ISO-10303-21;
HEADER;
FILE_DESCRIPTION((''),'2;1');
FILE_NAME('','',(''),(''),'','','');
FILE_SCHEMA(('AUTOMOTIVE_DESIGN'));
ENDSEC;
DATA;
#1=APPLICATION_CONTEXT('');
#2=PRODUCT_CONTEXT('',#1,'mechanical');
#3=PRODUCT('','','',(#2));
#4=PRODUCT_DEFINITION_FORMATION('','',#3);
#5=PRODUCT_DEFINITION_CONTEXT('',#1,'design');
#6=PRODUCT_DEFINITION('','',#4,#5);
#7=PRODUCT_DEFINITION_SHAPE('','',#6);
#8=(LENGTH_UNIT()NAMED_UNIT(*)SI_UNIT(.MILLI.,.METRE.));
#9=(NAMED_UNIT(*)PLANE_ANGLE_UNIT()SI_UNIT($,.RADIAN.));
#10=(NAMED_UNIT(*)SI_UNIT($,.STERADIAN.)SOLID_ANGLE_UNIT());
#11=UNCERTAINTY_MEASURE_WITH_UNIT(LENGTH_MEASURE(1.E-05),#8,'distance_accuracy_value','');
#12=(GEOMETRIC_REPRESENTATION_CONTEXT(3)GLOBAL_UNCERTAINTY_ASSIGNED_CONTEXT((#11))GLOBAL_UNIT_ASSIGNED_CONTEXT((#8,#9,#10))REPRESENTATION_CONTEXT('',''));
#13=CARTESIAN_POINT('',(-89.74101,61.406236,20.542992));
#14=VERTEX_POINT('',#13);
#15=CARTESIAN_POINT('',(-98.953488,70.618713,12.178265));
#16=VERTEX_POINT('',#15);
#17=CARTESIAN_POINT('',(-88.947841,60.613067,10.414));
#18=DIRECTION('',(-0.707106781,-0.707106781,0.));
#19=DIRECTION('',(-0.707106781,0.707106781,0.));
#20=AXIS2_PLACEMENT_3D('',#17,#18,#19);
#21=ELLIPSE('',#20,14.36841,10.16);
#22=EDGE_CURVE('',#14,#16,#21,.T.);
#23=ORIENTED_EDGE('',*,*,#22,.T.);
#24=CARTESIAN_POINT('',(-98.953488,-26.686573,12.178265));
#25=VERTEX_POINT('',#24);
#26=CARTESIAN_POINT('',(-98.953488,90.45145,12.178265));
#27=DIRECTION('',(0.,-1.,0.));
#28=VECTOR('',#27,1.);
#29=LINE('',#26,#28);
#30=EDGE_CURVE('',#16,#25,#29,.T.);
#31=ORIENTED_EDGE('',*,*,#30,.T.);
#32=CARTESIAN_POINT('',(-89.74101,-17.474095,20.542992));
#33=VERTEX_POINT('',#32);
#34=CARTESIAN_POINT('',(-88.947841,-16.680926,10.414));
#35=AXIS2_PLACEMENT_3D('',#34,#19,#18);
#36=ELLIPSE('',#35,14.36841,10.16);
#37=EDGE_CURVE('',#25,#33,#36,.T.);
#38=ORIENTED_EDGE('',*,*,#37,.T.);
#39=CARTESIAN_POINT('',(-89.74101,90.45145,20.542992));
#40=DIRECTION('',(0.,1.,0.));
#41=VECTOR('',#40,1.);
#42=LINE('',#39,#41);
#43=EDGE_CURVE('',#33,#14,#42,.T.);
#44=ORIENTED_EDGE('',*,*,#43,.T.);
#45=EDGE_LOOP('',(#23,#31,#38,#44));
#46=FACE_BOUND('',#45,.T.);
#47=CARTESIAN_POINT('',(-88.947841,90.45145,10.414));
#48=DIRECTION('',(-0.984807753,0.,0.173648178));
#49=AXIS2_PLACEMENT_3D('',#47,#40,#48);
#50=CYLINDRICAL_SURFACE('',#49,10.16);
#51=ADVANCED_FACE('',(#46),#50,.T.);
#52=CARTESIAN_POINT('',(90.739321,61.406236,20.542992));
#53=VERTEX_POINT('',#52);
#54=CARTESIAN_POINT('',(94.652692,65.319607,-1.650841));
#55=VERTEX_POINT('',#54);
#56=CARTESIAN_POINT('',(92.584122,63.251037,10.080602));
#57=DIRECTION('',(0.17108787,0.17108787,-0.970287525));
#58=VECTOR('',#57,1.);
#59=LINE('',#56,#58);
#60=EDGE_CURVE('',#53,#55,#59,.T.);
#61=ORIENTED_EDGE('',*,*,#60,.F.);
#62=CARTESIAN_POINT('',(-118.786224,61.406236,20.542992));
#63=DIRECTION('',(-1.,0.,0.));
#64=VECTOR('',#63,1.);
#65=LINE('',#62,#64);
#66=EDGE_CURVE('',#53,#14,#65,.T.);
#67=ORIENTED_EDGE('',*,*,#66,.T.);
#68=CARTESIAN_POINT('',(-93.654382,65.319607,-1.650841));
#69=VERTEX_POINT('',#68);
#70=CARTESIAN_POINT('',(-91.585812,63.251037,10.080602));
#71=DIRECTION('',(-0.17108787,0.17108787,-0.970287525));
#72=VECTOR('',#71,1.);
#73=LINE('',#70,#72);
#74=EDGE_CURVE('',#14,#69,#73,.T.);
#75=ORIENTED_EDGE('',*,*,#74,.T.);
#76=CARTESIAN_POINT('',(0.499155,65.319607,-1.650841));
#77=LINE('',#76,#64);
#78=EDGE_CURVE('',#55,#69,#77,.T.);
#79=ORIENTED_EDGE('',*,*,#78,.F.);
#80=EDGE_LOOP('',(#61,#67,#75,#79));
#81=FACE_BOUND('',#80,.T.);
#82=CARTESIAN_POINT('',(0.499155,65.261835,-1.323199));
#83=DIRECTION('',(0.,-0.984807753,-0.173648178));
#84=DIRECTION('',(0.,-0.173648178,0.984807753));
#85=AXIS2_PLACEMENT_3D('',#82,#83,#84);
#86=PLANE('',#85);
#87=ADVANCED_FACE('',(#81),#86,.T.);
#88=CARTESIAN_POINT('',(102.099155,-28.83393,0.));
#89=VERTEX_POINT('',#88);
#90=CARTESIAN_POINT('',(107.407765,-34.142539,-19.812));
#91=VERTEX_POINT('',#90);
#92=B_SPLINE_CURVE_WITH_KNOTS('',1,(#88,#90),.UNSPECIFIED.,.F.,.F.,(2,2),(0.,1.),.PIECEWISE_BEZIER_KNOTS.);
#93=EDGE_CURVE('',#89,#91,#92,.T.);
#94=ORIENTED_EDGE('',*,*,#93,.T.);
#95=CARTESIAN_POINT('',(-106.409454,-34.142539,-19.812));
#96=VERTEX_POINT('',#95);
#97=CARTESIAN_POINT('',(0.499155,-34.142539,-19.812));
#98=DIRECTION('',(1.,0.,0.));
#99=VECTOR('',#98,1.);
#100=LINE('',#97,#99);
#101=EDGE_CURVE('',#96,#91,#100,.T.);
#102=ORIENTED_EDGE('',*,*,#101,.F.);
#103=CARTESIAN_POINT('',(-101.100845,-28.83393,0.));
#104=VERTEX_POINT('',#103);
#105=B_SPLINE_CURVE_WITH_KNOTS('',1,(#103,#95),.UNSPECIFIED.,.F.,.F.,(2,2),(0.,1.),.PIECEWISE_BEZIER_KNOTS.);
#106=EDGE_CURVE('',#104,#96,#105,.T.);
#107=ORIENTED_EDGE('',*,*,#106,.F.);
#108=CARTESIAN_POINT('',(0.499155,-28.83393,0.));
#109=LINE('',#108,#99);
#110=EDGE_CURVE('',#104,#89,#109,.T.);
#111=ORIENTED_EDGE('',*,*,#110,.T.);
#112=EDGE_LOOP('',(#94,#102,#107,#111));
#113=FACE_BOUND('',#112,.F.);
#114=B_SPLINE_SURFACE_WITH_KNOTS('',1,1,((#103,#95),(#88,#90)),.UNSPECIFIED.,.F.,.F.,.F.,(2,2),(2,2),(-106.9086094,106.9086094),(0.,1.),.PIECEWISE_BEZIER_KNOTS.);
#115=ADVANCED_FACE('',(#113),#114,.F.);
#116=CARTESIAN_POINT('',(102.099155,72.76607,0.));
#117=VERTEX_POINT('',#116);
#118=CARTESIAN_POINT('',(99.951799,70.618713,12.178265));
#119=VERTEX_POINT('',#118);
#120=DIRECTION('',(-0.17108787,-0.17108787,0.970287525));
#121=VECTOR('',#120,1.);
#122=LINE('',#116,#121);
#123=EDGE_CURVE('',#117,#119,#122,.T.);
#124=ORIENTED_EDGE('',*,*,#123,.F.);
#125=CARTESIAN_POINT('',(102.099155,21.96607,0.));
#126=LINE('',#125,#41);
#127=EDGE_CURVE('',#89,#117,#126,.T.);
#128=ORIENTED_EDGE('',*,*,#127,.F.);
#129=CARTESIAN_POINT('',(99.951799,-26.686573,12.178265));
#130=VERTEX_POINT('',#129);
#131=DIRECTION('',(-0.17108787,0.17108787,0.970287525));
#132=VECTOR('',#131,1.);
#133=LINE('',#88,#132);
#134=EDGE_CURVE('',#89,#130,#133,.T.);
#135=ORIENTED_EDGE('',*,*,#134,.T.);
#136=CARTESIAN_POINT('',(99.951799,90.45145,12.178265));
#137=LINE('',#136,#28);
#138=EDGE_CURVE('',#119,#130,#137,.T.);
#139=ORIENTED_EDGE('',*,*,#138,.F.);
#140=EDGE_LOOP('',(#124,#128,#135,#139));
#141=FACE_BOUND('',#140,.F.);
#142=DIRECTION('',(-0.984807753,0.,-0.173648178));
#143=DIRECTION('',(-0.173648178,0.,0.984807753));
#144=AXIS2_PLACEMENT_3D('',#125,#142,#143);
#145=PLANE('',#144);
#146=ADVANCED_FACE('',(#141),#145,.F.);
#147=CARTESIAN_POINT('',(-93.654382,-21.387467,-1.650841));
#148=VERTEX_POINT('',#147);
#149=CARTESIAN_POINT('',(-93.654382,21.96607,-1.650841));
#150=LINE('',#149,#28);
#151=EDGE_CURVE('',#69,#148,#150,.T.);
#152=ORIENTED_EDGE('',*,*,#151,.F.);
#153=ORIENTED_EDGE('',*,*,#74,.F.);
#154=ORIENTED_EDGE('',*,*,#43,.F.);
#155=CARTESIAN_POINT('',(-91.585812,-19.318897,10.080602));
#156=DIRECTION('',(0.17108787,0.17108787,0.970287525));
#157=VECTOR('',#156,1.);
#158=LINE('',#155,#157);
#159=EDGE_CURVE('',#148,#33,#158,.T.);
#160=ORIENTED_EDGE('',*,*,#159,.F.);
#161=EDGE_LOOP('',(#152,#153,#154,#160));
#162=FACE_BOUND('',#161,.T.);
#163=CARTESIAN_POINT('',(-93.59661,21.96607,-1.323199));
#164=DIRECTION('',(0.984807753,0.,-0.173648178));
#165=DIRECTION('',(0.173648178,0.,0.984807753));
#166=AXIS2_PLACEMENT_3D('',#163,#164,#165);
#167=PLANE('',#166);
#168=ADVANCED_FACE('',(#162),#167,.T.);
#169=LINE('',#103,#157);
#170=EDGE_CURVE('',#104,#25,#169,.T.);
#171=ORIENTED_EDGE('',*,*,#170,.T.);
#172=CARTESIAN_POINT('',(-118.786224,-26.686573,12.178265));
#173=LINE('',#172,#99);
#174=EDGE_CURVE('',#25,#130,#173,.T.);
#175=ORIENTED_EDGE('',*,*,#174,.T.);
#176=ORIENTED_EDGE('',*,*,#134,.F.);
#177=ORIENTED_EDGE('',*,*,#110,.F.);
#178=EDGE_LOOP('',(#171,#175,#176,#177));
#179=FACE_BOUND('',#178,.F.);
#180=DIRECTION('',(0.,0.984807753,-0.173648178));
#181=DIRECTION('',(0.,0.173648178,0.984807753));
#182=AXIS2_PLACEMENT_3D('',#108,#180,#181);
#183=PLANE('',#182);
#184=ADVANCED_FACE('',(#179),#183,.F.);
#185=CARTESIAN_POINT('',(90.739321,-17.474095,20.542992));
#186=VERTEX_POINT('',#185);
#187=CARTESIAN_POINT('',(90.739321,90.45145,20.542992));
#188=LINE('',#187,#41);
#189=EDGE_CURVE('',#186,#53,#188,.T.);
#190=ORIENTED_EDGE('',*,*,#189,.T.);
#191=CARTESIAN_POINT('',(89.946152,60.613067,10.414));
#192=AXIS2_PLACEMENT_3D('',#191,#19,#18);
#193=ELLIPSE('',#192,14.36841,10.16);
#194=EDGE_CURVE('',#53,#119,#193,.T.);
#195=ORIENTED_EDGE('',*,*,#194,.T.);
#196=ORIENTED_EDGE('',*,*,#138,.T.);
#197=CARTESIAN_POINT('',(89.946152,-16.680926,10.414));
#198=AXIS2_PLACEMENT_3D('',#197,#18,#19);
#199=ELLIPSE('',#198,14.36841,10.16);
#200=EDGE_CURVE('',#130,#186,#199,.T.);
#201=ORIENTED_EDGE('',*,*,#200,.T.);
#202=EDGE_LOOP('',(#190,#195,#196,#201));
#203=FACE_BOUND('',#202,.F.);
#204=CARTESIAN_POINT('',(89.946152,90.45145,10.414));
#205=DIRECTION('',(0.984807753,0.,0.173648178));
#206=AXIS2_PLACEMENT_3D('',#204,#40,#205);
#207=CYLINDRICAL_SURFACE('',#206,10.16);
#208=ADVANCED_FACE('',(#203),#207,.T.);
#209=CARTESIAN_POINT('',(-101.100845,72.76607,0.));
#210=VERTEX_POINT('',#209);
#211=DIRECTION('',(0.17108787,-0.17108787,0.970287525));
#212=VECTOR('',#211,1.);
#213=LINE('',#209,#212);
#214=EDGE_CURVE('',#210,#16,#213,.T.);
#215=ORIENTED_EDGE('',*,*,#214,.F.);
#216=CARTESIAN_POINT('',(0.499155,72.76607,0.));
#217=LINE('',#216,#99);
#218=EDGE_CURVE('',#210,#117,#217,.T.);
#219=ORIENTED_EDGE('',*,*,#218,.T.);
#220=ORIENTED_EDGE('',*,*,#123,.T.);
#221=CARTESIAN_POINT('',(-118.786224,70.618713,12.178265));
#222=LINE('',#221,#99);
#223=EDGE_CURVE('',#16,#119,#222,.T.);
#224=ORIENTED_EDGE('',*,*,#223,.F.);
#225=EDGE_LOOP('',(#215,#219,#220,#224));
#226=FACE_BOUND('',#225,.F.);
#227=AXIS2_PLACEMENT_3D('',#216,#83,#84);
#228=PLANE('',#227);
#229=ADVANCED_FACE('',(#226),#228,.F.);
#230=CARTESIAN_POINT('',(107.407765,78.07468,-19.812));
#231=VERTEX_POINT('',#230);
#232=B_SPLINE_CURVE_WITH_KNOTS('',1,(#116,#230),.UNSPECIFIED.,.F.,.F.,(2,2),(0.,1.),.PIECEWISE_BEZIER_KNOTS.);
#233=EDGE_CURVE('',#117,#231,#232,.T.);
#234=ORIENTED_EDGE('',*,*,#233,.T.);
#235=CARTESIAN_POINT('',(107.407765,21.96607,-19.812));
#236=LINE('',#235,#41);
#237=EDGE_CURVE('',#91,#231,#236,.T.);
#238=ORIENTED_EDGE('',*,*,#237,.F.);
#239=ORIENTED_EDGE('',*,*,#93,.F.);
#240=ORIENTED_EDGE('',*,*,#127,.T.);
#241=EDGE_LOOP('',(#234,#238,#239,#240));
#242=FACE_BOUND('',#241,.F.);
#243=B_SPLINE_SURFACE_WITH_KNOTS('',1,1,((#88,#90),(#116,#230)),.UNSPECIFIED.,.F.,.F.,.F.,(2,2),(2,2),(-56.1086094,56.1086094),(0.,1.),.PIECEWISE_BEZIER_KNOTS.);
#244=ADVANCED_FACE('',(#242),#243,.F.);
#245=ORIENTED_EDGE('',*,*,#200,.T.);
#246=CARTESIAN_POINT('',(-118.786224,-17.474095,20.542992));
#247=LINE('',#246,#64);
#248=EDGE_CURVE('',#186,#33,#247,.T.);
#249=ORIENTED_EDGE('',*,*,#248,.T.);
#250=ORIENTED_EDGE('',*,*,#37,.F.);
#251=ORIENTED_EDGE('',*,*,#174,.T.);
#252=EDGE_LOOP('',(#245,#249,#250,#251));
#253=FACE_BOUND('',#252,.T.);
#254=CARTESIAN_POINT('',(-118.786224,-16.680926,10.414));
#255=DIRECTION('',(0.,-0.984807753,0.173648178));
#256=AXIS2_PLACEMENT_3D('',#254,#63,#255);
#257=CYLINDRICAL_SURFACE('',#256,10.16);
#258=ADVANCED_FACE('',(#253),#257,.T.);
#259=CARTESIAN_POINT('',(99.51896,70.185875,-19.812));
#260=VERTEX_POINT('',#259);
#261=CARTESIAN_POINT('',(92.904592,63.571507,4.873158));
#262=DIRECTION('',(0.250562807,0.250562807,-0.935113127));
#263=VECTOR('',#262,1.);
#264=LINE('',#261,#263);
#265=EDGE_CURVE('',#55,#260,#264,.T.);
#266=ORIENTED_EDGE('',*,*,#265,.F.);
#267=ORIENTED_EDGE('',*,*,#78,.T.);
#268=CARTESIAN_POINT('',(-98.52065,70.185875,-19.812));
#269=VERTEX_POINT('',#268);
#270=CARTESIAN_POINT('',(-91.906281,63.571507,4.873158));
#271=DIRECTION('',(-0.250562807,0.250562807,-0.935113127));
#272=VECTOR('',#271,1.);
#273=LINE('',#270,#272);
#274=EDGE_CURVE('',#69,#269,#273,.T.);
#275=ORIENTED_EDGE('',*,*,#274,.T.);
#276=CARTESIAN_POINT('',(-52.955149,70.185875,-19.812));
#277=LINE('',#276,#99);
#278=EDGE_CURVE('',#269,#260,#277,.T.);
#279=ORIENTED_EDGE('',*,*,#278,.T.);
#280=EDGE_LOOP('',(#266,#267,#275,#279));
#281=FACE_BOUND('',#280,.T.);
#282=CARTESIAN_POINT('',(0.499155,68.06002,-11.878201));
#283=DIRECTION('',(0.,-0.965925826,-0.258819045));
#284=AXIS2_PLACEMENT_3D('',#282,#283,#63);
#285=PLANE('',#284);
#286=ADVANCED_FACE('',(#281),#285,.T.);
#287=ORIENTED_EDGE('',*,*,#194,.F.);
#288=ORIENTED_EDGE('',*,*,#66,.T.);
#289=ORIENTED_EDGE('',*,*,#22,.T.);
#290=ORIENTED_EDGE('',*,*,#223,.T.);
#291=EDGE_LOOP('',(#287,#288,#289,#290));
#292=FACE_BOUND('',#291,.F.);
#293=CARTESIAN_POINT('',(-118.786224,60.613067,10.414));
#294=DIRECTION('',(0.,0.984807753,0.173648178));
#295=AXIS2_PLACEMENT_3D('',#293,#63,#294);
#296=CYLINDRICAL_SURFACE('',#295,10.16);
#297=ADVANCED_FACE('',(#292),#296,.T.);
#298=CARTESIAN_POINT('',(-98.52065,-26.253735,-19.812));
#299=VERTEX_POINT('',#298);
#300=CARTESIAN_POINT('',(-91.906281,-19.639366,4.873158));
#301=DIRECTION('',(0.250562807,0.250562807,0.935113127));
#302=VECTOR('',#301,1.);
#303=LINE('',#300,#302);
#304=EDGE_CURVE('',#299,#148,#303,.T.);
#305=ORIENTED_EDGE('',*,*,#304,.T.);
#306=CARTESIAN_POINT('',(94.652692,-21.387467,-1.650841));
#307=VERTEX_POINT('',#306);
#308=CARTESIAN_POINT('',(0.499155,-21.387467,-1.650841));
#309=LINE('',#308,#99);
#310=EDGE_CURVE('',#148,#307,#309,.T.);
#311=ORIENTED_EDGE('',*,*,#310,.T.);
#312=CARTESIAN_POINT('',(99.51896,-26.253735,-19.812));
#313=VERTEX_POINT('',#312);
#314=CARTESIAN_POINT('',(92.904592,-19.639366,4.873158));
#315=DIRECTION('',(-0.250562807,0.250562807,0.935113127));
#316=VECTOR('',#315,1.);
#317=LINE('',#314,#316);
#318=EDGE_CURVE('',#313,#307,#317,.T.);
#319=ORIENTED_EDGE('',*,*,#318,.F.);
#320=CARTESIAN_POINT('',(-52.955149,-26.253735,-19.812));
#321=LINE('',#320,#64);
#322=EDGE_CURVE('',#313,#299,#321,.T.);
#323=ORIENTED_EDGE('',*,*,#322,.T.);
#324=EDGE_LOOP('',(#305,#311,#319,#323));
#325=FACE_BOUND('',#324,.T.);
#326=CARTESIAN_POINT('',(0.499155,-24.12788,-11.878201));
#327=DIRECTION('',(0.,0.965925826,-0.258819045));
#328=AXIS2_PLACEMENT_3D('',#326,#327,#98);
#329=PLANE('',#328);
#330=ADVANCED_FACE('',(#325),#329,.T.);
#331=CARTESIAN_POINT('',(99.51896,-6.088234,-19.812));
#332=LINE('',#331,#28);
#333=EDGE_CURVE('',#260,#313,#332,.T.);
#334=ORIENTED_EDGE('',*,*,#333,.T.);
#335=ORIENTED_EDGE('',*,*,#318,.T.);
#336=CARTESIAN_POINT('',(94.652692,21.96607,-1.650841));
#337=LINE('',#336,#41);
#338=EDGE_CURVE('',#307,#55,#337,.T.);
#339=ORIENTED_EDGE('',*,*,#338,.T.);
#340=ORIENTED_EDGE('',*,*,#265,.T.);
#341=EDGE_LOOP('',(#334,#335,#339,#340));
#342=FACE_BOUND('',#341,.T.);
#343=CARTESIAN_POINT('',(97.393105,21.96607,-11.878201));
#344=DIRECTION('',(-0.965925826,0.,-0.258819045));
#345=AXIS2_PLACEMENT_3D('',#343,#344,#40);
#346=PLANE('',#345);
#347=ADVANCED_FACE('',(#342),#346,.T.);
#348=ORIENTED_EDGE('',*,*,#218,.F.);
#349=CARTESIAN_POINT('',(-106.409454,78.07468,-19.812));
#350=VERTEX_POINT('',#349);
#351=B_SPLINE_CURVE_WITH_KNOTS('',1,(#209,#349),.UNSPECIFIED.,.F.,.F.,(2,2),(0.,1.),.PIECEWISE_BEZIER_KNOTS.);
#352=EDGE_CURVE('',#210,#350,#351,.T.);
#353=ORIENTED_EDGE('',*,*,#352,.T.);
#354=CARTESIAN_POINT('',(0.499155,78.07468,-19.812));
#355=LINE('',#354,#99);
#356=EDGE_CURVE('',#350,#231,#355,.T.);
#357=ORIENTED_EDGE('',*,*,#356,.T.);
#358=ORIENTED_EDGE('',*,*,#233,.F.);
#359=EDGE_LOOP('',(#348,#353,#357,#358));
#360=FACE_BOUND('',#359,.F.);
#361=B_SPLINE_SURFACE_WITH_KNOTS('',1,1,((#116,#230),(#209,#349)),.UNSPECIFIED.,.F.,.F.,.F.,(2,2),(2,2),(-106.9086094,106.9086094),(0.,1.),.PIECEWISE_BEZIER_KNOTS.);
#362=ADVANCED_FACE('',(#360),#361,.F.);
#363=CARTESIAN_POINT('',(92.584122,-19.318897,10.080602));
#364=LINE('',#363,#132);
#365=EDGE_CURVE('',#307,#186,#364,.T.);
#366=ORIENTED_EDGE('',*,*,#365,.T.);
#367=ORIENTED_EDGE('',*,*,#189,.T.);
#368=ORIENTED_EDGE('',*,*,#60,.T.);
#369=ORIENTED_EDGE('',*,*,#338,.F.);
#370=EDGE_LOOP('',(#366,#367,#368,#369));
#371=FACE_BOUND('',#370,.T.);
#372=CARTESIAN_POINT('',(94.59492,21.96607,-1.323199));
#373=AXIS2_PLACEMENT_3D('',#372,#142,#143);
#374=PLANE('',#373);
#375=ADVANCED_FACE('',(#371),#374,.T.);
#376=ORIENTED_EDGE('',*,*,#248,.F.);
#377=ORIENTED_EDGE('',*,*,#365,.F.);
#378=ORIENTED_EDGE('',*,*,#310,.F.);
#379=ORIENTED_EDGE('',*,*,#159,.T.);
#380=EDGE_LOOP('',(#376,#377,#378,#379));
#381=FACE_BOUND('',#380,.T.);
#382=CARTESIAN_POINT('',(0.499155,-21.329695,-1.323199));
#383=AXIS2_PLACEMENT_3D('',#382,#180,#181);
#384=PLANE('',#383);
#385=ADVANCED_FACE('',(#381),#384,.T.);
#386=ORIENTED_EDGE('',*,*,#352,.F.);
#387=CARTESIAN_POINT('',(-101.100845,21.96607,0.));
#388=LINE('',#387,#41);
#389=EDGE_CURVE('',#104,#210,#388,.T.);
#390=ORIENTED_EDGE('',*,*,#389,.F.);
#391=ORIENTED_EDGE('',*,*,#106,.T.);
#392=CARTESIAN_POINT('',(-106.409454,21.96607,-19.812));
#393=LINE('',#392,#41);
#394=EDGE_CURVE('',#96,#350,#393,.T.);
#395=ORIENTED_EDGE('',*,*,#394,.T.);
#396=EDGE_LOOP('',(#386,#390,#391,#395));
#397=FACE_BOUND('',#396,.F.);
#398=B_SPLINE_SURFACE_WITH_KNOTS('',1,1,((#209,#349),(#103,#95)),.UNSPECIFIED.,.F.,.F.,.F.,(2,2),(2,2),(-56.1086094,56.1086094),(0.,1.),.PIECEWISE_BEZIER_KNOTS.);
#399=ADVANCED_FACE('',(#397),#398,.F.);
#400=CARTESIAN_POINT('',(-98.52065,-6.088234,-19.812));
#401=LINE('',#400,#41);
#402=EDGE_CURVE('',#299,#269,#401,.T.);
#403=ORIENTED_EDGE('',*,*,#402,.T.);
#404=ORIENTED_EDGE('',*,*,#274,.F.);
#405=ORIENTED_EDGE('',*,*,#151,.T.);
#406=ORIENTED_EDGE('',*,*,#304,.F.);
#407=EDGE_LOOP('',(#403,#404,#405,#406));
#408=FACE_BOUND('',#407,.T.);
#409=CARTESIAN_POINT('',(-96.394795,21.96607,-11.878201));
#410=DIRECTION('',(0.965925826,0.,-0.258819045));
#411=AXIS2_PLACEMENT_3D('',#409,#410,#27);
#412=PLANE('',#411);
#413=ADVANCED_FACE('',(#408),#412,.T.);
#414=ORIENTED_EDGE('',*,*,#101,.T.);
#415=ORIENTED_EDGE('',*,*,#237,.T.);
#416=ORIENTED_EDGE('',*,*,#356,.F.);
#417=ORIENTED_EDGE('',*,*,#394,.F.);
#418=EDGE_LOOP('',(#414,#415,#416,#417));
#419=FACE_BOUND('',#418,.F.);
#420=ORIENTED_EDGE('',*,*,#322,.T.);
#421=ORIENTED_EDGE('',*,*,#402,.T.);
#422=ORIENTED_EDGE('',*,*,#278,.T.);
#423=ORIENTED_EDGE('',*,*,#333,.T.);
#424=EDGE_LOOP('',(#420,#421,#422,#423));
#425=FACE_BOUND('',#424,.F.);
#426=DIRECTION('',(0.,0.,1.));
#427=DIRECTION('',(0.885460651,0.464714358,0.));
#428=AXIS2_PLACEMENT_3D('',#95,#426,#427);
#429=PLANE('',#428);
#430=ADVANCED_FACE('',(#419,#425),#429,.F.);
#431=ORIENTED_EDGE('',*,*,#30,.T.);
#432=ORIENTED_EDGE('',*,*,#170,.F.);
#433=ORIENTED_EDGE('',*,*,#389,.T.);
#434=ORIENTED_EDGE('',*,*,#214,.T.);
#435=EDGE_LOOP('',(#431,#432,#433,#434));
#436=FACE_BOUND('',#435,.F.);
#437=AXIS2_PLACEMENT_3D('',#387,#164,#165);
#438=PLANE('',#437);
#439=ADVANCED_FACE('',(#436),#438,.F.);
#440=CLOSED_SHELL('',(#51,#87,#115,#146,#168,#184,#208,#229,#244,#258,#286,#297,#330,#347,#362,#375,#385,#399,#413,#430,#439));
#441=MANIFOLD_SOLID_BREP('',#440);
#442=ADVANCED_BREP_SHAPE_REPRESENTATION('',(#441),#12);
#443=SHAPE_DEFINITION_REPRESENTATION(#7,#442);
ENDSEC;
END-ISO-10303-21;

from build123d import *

# Parameters (mm, degrees)
F0_W          = 203.2
F0_H          = 101.6
F1_DEPTH      = 20.574
F1_TAPER      = 10
F1_DEPTH_BACK = 19.812
F1_TAPER_BACK = -15
F2_T          = -7.62
F3_T1_DEPTH   = 238.5707586616
F3_T3_DEPTH   = 136.9707586616


# Not quite as in the source:
# - a fillet or chamfer that OpenCascade refuses, or shapes differently, is made with other operations: its cross-section is extruded or revolved along the edge and cut away or added


with BuildPart() as f1:
    # F0 (on Top) → F1 (new body, two sides)
    with BuildSketch(Plane.XY) as f1_sk:
        with Locations((0.4991553724, 21.9660702551)):
            Rectangle(F0_W, F0_H)
    extrude(amount=F1_DEPTH, taper=F1_TAPER)
    extrude(f1_sk.sketch, amount=-F1_DEPTH_BACK, taper=F1_TAPER_BACK)

    # F2
    f2_openings = [f1.faces().sort_by_distance(p)[0] for p in [
        (0.499155, 21.96607, 20.574),
        (0.499155, 21.96607, -19.812),
    ]]
    offset(amount=F2_T, openings=f2_openings, kind=Kind.INTERSECTION)

    # F3: fillet of radius 10.16 on 4 edges, made by hand

    # F3_s2 → F3_t1 (cut)
    with BuildSketch(Plane.YZ.offset(-118.7862239584)):
        with BuildLine():
            ThreePointArc((70.6187134719, 12.1782654851), (67.1437888157, 18.1970115421), (60.6130667013, 20.574))
            Line((60.6130667013, 20.574), (69.138318954, 20.574))
            Line((69.138318954, 20.574), (70.6187134719, 12.1782654851))
        make_face()
        with BuildLine():
            ThreePointArc((-26.6865729616, 12.1782654851), (-23.2116483054, 18.1970115421), (-16.680926191, 20.574))
            Line((-16.680926191, 20.574), (-25.2061784438, 20.574))
            Line((-25.2061784438, 20.574), (-26.6865729616, 12.1782654851))
        make_face()
    extrude(amount=F3_T1_DEPTH, mode=Mode.SUBTRACT)

    # F3_s4 → F3_t3 (cut)
    with BuildSketch(Plane.XZ.offset(-90.4514495859)):
        with BuildLine():
            ThreePointArc((99.9517985891, 12.1782654851), (96.4768739329, 18.1970115421), (89.9461518185, 20.574))
            Line((89.9461518185, 20.574), (98.4714040713, 20.574))
            Line((98.4714040713, 20.574), (99.9517985891, 12.1782654851))
        make_face()
        with BuildLine():
            ThreePointArc((-98.9534878444, 12.1782654851), (-95.4785631882, 18.1970115421), (-88.9478410738, 20.574))
            Line((-88.9478410738, 20.574), (-97.4730933265, 20.574))
            Line((-97.4730933265, 20.574), (-98.9534878444, 12.1782654851))
        make_face()
    extrude(amount=F3_T3_DEPTH, mode=Mode.SUBTRACT)


solid = f1.part
